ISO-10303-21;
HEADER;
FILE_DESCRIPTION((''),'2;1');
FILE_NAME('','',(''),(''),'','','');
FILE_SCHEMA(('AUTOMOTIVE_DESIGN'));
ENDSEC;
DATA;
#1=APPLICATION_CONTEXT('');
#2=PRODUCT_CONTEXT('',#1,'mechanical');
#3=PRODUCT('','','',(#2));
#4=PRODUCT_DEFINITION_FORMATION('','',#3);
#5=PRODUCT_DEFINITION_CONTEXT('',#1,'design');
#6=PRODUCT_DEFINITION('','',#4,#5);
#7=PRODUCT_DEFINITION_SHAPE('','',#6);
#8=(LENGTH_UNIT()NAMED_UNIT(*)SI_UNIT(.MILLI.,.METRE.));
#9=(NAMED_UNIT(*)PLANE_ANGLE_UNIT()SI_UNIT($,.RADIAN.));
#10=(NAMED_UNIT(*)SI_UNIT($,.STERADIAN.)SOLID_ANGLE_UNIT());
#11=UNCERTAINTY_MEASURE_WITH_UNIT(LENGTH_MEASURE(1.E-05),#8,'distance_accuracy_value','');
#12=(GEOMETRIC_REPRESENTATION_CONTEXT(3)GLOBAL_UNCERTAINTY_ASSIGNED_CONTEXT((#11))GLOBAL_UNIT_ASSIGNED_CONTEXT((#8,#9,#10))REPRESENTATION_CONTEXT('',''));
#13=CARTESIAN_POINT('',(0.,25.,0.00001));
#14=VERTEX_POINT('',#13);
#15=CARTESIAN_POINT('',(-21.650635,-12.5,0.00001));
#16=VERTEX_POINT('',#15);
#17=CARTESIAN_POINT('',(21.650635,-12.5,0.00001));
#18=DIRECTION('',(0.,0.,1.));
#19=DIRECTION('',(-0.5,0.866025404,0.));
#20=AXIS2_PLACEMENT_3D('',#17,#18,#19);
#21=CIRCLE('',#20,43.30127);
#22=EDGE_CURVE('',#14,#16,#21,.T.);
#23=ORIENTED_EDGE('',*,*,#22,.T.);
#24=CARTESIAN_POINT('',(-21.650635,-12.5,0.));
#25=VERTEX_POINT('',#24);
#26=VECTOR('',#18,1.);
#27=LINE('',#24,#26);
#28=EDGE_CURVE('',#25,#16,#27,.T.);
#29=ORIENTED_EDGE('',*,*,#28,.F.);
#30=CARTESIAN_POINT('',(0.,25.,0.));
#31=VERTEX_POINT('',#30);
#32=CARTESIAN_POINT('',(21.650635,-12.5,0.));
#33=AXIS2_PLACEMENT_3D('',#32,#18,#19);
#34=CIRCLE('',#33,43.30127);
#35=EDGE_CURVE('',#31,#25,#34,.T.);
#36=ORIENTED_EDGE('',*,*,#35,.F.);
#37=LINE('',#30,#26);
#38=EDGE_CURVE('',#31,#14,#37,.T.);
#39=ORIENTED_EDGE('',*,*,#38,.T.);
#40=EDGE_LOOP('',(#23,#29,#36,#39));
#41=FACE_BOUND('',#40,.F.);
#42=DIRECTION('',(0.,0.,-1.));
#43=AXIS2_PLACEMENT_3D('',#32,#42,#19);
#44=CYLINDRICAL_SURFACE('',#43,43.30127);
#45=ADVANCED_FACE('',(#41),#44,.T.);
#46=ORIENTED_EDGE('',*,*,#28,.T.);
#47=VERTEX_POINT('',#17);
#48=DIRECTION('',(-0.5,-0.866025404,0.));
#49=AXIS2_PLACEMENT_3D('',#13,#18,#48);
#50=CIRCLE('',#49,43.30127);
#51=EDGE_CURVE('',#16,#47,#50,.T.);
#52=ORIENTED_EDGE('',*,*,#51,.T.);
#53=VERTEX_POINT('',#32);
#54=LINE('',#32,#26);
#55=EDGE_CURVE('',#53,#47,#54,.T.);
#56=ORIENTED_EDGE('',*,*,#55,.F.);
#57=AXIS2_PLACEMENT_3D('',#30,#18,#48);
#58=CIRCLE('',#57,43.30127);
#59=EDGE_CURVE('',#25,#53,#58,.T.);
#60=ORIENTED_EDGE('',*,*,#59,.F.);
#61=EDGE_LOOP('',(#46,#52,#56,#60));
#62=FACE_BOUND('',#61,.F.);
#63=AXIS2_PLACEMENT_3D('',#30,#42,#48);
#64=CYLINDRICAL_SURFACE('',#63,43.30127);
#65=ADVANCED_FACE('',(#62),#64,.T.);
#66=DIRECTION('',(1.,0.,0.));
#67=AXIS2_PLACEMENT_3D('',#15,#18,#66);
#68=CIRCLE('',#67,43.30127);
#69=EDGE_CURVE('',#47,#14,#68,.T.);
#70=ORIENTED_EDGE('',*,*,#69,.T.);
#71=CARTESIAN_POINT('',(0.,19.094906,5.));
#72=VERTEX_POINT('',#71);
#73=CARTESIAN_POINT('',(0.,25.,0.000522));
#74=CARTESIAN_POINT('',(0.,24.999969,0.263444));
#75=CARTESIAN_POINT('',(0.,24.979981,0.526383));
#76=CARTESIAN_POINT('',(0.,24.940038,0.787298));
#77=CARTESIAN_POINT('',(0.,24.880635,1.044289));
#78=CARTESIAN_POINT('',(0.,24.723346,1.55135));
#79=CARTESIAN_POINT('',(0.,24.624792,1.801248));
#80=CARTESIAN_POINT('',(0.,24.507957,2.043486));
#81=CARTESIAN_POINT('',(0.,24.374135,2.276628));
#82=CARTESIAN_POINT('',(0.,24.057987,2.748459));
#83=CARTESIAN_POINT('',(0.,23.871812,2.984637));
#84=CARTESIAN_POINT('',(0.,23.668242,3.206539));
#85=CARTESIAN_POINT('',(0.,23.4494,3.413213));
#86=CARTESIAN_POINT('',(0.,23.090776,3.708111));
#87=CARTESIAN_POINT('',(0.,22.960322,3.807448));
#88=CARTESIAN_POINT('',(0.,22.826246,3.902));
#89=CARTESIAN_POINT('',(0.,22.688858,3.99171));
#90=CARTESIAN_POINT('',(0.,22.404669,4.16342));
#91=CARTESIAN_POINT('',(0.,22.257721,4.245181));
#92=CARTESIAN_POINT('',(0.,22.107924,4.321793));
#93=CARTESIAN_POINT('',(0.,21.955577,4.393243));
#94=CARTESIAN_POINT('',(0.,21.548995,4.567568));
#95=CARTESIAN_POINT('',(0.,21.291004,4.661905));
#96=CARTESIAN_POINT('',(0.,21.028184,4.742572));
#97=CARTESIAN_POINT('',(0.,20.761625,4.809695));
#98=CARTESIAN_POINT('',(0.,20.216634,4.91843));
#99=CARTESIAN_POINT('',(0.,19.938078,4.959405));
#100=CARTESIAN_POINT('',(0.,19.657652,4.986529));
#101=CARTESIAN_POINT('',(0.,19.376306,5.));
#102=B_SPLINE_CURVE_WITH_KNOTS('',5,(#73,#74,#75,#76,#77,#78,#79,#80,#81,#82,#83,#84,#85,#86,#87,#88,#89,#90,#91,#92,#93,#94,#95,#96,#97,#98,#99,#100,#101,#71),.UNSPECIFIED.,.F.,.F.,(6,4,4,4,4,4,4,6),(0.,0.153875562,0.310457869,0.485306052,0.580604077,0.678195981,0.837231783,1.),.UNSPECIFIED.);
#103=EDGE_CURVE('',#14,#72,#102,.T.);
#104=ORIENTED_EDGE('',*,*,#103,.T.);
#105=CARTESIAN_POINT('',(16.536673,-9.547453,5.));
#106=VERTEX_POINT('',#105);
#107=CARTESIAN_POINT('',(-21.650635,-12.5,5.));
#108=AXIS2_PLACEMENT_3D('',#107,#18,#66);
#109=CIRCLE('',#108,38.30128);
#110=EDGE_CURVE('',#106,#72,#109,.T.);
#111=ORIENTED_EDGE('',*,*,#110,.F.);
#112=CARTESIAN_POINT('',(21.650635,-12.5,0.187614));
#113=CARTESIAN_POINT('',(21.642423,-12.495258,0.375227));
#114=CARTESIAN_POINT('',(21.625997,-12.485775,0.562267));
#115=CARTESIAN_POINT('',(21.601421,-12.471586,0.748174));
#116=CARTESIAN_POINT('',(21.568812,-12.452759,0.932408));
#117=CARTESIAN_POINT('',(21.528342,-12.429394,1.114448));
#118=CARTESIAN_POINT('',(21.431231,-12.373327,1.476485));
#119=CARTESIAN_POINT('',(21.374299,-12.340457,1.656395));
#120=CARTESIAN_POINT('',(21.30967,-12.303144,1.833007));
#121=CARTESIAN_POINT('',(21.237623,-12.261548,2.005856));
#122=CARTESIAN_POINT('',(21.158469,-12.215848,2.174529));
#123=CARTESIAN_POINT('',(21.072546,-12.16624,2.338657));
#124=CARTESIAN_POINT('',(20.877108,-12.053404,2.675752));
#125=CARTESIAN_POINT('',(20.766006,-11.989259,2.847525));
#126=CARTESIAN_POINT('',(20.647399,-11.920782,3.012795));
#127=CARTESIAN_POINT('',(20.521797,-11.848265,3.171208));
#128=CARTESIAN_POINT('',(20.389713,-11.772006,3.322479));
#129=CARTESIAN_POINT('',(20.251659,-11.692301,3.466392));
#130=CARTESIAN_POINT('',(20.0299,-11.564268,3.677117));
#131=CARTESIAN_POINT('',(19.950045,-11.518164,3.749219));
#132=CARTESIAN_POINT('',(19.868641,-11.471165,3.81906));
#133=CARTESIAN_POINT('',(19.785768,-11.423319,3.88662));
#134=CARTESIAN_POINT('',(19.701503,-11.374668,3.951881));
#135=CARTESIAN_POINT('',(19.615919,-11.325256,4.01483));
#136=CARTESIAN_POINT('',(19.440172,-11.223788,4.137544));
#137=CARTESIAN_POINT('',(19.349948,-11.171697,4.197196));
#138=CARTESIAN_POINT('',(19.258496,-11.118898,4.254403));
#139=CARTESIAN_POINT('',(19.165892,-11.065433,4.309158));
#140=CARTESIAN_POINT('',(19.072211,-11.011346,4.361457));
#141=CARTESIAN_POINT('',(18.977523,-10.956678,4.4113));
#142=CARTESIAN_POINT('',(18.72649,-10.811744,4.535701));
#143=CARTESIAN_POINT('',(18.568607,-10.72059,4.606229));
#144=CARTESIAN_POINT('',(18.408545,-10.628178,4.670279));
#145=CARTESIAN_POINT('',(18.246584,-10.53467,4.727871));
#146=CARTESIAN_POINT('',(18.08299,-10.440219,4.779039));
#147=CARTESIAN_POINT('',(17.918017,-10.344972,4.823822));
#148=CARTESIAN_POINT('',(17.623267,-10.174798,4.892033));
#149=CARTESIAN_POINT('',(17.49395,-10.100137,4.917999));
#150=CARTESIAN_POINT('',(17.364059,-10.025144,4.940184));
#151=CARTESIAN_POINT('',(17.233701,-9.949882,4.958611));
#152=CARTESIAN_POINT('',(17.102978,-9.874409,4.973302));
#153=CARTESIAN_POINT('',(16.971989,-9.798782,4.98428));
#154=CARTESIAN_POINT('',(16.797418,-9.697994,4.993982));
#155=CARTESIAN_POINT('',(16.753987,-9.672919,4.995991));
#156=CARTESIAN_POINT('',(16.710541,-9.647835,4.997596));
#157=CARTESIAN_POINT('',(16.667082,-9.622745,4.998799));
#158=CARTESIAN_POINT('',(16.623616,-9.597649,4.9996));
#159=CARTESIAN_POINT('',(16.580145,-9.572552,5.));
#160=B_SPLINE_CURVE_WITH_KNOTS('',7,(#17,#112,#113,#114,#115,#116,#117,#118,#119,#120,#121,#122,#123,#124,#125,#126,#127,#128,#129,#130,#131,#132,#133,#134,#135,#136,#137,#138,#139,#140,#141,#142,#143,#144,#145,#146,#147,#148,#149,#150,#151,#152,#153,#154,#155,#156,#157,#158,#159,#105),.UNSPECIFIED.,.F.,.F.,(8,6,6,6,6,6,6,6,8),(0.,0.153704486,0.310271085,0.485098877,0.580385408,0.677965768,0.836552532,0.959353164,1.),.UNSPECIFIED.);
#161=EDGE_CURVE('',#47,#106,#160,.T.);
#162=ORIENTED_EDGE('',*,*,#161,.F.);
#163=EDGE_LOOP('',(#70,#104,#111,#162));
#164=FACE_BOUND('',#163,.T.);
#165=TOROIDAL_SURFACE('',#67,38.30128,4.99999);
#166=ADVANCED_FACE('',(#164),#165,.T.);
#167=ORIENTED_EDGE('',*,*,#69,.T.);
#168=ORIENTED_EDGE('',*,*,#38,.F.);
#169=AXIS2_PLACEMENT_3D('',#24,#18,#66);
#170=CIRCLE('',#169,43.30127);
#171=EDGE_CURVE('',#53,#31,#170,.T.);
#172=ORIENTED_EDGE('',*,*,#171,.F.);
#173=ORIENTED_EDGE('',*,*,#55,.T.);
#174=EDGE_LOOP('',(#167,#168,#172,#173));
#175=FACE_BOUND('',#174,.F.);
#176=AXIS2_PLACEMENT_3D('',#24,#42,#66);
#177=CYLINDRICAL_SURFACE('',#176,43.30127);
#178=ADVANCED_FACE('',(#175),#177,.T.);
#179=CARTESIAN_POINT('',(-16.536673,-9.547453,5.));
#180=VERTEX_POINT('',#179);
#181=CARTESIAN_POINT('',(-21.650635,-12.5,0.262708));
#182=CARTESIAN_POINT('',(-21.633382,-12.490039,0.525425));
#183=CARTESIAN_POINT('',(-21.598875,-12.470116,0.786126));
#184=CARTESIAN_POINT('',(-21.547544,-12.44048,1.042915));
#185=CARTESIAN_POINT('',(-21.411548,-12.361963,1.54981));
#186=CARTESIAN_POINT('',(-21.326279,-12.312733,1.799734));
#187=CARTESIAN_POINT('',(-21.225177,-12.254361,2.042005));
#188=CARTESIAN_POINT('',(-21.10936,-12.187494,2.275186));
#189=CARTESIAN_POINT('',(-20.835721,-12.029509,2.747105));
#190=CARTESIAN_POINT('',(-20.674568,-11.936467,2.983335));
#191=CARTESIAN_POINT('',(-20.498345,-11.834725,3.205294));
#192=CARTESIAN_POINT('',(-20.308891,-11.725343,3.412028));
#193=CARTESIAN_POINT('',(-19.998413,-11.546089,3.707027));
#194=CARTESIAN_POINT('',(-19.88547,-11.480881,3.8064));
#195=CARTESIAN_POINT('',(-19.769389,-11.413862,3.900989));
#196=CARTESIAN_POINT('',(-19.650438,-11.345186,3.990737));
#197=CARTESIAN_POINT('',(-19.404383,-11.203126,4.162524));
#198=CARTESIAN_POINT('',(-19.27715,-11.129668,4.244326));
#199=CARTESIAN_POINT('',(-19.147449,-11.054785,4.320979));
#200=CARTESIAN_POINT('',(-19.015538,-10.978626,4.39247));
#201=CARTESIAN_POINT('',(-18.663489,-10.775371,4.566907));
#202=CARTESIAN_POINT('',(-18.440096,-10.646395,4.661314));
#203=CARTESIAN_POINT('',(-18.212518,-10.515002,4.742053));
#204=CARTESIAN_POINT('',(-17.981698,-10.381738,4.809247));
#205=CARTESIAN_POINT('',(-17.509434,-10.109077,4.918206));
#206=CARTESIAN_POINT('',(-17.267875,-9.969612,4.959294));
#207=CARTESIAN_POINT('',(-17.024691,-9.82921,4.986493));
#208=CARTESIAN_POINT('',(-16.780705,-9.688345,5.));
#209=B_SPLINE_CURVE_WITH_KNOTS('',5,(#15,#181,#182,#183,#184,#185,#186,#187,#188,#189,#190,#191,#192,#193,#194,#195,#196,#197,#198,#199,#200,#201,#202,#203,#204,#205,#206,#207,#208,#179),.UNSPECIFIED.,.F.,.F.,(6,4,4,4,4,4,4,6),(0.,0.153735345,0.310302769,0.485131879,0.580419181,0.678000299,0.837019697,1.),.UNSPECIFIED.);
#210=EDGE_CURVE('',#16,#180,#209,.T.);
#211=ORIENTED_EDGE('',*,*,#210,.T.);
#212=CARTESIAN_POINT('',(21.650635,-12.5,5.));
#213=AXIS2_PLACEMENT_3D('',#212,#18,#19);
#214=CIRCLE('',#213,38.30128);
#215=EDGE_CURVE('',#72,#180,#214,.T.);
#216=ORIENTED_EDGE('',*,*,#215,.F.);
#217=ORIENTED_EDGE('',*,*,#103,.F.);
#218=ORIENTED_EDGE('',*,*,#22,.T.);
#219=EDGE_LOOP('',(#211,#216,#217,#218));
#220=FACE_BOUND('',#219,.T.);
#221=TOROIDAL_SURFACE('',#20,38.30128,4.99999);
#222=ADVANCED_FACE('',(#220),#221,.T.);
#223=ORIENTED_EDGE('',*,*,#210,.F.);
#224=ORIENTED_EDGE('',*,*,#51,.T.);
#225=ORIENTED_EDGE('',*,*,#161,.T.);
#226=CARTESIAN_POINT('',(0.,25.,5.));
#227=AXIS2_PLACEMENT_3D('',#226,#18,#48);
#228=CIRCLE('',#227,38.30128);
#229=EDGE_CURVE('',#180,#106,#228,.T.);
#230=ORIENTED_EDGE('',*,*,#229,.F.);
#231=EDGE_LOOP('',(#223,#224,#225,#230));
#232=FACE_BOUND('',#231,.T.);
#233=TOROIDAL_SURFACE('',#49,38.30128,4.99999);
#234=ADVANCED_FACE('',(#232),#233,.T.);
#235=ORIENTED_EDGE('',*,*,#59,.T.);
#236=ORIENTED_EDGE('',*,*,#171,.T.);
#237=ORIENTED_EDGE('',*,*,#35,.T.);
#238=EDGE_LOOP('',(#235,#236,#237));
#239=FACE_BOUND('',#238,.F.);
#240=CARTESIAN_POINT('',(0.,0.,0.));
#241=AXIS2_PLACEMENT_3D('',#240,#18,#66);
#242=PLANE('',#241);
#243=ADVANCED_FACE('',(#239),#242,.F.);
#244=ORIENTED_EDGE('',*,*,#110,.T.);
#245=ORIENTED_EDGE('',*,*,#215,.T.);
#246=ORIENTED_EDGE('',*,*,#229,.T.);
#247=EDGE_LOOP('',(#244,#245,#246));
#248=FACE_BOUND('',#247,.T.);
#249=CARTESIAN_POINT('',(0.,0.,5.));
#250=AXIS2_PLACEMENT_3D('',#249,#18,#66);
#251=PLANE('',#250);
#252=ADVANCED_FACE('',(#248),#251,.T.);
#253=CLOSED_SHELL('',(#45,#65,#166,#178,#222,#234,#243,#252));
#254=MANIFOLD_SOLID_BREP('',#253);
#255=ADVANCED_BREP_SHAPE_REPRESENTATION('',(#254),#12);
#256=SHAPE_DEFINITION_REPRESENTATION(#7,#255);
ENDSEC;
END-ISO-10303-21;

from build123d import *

# Parameters (mm, degrees)
F1_DEPTH = 5
F2_R     = 4.99999


# Not quite as in the source:
# - a fillet or chamfer is up to 0.001 mm smaller than in the source, because OpenCascade refuses the exact size
# - a feature of the source that left no trace in its solid (it failed there, or was rolled back) is left out


with BuildPart() as f1:
    # F0 (on Top) → F1 (new body)
    with BuildSketch(Plane.XY):
        with BuildLine():
            ThreePointArc((-21.6506350946, -12.5), (0, -18.3012701892), (21.6506350946, -12.5))
            ThreePointArc((21.6506350946, -12.5), (15.8493649054, 9.1506350946), (0, 25))
            ThreePointArc((0, 25), (-15.8493649054, 9.1506350946), (-21.6506350946, -12.5))
        make_face()
    extrude(amount=F1_DEPTH)

    # F2 (radius 5 in the source; OpenCascade refuses exactly that, so slightly less here)
    f2_edges = [f1.edges().sort_by_distance(p)[0] for p in [
        (-15.849365, 9.150635, 5),
        (0, -18.30127, 5),
        (15.849365, 9.150635, 5),
    ]]
    fillet(f2_edges, radius=F2_R)


solid = f1.part
